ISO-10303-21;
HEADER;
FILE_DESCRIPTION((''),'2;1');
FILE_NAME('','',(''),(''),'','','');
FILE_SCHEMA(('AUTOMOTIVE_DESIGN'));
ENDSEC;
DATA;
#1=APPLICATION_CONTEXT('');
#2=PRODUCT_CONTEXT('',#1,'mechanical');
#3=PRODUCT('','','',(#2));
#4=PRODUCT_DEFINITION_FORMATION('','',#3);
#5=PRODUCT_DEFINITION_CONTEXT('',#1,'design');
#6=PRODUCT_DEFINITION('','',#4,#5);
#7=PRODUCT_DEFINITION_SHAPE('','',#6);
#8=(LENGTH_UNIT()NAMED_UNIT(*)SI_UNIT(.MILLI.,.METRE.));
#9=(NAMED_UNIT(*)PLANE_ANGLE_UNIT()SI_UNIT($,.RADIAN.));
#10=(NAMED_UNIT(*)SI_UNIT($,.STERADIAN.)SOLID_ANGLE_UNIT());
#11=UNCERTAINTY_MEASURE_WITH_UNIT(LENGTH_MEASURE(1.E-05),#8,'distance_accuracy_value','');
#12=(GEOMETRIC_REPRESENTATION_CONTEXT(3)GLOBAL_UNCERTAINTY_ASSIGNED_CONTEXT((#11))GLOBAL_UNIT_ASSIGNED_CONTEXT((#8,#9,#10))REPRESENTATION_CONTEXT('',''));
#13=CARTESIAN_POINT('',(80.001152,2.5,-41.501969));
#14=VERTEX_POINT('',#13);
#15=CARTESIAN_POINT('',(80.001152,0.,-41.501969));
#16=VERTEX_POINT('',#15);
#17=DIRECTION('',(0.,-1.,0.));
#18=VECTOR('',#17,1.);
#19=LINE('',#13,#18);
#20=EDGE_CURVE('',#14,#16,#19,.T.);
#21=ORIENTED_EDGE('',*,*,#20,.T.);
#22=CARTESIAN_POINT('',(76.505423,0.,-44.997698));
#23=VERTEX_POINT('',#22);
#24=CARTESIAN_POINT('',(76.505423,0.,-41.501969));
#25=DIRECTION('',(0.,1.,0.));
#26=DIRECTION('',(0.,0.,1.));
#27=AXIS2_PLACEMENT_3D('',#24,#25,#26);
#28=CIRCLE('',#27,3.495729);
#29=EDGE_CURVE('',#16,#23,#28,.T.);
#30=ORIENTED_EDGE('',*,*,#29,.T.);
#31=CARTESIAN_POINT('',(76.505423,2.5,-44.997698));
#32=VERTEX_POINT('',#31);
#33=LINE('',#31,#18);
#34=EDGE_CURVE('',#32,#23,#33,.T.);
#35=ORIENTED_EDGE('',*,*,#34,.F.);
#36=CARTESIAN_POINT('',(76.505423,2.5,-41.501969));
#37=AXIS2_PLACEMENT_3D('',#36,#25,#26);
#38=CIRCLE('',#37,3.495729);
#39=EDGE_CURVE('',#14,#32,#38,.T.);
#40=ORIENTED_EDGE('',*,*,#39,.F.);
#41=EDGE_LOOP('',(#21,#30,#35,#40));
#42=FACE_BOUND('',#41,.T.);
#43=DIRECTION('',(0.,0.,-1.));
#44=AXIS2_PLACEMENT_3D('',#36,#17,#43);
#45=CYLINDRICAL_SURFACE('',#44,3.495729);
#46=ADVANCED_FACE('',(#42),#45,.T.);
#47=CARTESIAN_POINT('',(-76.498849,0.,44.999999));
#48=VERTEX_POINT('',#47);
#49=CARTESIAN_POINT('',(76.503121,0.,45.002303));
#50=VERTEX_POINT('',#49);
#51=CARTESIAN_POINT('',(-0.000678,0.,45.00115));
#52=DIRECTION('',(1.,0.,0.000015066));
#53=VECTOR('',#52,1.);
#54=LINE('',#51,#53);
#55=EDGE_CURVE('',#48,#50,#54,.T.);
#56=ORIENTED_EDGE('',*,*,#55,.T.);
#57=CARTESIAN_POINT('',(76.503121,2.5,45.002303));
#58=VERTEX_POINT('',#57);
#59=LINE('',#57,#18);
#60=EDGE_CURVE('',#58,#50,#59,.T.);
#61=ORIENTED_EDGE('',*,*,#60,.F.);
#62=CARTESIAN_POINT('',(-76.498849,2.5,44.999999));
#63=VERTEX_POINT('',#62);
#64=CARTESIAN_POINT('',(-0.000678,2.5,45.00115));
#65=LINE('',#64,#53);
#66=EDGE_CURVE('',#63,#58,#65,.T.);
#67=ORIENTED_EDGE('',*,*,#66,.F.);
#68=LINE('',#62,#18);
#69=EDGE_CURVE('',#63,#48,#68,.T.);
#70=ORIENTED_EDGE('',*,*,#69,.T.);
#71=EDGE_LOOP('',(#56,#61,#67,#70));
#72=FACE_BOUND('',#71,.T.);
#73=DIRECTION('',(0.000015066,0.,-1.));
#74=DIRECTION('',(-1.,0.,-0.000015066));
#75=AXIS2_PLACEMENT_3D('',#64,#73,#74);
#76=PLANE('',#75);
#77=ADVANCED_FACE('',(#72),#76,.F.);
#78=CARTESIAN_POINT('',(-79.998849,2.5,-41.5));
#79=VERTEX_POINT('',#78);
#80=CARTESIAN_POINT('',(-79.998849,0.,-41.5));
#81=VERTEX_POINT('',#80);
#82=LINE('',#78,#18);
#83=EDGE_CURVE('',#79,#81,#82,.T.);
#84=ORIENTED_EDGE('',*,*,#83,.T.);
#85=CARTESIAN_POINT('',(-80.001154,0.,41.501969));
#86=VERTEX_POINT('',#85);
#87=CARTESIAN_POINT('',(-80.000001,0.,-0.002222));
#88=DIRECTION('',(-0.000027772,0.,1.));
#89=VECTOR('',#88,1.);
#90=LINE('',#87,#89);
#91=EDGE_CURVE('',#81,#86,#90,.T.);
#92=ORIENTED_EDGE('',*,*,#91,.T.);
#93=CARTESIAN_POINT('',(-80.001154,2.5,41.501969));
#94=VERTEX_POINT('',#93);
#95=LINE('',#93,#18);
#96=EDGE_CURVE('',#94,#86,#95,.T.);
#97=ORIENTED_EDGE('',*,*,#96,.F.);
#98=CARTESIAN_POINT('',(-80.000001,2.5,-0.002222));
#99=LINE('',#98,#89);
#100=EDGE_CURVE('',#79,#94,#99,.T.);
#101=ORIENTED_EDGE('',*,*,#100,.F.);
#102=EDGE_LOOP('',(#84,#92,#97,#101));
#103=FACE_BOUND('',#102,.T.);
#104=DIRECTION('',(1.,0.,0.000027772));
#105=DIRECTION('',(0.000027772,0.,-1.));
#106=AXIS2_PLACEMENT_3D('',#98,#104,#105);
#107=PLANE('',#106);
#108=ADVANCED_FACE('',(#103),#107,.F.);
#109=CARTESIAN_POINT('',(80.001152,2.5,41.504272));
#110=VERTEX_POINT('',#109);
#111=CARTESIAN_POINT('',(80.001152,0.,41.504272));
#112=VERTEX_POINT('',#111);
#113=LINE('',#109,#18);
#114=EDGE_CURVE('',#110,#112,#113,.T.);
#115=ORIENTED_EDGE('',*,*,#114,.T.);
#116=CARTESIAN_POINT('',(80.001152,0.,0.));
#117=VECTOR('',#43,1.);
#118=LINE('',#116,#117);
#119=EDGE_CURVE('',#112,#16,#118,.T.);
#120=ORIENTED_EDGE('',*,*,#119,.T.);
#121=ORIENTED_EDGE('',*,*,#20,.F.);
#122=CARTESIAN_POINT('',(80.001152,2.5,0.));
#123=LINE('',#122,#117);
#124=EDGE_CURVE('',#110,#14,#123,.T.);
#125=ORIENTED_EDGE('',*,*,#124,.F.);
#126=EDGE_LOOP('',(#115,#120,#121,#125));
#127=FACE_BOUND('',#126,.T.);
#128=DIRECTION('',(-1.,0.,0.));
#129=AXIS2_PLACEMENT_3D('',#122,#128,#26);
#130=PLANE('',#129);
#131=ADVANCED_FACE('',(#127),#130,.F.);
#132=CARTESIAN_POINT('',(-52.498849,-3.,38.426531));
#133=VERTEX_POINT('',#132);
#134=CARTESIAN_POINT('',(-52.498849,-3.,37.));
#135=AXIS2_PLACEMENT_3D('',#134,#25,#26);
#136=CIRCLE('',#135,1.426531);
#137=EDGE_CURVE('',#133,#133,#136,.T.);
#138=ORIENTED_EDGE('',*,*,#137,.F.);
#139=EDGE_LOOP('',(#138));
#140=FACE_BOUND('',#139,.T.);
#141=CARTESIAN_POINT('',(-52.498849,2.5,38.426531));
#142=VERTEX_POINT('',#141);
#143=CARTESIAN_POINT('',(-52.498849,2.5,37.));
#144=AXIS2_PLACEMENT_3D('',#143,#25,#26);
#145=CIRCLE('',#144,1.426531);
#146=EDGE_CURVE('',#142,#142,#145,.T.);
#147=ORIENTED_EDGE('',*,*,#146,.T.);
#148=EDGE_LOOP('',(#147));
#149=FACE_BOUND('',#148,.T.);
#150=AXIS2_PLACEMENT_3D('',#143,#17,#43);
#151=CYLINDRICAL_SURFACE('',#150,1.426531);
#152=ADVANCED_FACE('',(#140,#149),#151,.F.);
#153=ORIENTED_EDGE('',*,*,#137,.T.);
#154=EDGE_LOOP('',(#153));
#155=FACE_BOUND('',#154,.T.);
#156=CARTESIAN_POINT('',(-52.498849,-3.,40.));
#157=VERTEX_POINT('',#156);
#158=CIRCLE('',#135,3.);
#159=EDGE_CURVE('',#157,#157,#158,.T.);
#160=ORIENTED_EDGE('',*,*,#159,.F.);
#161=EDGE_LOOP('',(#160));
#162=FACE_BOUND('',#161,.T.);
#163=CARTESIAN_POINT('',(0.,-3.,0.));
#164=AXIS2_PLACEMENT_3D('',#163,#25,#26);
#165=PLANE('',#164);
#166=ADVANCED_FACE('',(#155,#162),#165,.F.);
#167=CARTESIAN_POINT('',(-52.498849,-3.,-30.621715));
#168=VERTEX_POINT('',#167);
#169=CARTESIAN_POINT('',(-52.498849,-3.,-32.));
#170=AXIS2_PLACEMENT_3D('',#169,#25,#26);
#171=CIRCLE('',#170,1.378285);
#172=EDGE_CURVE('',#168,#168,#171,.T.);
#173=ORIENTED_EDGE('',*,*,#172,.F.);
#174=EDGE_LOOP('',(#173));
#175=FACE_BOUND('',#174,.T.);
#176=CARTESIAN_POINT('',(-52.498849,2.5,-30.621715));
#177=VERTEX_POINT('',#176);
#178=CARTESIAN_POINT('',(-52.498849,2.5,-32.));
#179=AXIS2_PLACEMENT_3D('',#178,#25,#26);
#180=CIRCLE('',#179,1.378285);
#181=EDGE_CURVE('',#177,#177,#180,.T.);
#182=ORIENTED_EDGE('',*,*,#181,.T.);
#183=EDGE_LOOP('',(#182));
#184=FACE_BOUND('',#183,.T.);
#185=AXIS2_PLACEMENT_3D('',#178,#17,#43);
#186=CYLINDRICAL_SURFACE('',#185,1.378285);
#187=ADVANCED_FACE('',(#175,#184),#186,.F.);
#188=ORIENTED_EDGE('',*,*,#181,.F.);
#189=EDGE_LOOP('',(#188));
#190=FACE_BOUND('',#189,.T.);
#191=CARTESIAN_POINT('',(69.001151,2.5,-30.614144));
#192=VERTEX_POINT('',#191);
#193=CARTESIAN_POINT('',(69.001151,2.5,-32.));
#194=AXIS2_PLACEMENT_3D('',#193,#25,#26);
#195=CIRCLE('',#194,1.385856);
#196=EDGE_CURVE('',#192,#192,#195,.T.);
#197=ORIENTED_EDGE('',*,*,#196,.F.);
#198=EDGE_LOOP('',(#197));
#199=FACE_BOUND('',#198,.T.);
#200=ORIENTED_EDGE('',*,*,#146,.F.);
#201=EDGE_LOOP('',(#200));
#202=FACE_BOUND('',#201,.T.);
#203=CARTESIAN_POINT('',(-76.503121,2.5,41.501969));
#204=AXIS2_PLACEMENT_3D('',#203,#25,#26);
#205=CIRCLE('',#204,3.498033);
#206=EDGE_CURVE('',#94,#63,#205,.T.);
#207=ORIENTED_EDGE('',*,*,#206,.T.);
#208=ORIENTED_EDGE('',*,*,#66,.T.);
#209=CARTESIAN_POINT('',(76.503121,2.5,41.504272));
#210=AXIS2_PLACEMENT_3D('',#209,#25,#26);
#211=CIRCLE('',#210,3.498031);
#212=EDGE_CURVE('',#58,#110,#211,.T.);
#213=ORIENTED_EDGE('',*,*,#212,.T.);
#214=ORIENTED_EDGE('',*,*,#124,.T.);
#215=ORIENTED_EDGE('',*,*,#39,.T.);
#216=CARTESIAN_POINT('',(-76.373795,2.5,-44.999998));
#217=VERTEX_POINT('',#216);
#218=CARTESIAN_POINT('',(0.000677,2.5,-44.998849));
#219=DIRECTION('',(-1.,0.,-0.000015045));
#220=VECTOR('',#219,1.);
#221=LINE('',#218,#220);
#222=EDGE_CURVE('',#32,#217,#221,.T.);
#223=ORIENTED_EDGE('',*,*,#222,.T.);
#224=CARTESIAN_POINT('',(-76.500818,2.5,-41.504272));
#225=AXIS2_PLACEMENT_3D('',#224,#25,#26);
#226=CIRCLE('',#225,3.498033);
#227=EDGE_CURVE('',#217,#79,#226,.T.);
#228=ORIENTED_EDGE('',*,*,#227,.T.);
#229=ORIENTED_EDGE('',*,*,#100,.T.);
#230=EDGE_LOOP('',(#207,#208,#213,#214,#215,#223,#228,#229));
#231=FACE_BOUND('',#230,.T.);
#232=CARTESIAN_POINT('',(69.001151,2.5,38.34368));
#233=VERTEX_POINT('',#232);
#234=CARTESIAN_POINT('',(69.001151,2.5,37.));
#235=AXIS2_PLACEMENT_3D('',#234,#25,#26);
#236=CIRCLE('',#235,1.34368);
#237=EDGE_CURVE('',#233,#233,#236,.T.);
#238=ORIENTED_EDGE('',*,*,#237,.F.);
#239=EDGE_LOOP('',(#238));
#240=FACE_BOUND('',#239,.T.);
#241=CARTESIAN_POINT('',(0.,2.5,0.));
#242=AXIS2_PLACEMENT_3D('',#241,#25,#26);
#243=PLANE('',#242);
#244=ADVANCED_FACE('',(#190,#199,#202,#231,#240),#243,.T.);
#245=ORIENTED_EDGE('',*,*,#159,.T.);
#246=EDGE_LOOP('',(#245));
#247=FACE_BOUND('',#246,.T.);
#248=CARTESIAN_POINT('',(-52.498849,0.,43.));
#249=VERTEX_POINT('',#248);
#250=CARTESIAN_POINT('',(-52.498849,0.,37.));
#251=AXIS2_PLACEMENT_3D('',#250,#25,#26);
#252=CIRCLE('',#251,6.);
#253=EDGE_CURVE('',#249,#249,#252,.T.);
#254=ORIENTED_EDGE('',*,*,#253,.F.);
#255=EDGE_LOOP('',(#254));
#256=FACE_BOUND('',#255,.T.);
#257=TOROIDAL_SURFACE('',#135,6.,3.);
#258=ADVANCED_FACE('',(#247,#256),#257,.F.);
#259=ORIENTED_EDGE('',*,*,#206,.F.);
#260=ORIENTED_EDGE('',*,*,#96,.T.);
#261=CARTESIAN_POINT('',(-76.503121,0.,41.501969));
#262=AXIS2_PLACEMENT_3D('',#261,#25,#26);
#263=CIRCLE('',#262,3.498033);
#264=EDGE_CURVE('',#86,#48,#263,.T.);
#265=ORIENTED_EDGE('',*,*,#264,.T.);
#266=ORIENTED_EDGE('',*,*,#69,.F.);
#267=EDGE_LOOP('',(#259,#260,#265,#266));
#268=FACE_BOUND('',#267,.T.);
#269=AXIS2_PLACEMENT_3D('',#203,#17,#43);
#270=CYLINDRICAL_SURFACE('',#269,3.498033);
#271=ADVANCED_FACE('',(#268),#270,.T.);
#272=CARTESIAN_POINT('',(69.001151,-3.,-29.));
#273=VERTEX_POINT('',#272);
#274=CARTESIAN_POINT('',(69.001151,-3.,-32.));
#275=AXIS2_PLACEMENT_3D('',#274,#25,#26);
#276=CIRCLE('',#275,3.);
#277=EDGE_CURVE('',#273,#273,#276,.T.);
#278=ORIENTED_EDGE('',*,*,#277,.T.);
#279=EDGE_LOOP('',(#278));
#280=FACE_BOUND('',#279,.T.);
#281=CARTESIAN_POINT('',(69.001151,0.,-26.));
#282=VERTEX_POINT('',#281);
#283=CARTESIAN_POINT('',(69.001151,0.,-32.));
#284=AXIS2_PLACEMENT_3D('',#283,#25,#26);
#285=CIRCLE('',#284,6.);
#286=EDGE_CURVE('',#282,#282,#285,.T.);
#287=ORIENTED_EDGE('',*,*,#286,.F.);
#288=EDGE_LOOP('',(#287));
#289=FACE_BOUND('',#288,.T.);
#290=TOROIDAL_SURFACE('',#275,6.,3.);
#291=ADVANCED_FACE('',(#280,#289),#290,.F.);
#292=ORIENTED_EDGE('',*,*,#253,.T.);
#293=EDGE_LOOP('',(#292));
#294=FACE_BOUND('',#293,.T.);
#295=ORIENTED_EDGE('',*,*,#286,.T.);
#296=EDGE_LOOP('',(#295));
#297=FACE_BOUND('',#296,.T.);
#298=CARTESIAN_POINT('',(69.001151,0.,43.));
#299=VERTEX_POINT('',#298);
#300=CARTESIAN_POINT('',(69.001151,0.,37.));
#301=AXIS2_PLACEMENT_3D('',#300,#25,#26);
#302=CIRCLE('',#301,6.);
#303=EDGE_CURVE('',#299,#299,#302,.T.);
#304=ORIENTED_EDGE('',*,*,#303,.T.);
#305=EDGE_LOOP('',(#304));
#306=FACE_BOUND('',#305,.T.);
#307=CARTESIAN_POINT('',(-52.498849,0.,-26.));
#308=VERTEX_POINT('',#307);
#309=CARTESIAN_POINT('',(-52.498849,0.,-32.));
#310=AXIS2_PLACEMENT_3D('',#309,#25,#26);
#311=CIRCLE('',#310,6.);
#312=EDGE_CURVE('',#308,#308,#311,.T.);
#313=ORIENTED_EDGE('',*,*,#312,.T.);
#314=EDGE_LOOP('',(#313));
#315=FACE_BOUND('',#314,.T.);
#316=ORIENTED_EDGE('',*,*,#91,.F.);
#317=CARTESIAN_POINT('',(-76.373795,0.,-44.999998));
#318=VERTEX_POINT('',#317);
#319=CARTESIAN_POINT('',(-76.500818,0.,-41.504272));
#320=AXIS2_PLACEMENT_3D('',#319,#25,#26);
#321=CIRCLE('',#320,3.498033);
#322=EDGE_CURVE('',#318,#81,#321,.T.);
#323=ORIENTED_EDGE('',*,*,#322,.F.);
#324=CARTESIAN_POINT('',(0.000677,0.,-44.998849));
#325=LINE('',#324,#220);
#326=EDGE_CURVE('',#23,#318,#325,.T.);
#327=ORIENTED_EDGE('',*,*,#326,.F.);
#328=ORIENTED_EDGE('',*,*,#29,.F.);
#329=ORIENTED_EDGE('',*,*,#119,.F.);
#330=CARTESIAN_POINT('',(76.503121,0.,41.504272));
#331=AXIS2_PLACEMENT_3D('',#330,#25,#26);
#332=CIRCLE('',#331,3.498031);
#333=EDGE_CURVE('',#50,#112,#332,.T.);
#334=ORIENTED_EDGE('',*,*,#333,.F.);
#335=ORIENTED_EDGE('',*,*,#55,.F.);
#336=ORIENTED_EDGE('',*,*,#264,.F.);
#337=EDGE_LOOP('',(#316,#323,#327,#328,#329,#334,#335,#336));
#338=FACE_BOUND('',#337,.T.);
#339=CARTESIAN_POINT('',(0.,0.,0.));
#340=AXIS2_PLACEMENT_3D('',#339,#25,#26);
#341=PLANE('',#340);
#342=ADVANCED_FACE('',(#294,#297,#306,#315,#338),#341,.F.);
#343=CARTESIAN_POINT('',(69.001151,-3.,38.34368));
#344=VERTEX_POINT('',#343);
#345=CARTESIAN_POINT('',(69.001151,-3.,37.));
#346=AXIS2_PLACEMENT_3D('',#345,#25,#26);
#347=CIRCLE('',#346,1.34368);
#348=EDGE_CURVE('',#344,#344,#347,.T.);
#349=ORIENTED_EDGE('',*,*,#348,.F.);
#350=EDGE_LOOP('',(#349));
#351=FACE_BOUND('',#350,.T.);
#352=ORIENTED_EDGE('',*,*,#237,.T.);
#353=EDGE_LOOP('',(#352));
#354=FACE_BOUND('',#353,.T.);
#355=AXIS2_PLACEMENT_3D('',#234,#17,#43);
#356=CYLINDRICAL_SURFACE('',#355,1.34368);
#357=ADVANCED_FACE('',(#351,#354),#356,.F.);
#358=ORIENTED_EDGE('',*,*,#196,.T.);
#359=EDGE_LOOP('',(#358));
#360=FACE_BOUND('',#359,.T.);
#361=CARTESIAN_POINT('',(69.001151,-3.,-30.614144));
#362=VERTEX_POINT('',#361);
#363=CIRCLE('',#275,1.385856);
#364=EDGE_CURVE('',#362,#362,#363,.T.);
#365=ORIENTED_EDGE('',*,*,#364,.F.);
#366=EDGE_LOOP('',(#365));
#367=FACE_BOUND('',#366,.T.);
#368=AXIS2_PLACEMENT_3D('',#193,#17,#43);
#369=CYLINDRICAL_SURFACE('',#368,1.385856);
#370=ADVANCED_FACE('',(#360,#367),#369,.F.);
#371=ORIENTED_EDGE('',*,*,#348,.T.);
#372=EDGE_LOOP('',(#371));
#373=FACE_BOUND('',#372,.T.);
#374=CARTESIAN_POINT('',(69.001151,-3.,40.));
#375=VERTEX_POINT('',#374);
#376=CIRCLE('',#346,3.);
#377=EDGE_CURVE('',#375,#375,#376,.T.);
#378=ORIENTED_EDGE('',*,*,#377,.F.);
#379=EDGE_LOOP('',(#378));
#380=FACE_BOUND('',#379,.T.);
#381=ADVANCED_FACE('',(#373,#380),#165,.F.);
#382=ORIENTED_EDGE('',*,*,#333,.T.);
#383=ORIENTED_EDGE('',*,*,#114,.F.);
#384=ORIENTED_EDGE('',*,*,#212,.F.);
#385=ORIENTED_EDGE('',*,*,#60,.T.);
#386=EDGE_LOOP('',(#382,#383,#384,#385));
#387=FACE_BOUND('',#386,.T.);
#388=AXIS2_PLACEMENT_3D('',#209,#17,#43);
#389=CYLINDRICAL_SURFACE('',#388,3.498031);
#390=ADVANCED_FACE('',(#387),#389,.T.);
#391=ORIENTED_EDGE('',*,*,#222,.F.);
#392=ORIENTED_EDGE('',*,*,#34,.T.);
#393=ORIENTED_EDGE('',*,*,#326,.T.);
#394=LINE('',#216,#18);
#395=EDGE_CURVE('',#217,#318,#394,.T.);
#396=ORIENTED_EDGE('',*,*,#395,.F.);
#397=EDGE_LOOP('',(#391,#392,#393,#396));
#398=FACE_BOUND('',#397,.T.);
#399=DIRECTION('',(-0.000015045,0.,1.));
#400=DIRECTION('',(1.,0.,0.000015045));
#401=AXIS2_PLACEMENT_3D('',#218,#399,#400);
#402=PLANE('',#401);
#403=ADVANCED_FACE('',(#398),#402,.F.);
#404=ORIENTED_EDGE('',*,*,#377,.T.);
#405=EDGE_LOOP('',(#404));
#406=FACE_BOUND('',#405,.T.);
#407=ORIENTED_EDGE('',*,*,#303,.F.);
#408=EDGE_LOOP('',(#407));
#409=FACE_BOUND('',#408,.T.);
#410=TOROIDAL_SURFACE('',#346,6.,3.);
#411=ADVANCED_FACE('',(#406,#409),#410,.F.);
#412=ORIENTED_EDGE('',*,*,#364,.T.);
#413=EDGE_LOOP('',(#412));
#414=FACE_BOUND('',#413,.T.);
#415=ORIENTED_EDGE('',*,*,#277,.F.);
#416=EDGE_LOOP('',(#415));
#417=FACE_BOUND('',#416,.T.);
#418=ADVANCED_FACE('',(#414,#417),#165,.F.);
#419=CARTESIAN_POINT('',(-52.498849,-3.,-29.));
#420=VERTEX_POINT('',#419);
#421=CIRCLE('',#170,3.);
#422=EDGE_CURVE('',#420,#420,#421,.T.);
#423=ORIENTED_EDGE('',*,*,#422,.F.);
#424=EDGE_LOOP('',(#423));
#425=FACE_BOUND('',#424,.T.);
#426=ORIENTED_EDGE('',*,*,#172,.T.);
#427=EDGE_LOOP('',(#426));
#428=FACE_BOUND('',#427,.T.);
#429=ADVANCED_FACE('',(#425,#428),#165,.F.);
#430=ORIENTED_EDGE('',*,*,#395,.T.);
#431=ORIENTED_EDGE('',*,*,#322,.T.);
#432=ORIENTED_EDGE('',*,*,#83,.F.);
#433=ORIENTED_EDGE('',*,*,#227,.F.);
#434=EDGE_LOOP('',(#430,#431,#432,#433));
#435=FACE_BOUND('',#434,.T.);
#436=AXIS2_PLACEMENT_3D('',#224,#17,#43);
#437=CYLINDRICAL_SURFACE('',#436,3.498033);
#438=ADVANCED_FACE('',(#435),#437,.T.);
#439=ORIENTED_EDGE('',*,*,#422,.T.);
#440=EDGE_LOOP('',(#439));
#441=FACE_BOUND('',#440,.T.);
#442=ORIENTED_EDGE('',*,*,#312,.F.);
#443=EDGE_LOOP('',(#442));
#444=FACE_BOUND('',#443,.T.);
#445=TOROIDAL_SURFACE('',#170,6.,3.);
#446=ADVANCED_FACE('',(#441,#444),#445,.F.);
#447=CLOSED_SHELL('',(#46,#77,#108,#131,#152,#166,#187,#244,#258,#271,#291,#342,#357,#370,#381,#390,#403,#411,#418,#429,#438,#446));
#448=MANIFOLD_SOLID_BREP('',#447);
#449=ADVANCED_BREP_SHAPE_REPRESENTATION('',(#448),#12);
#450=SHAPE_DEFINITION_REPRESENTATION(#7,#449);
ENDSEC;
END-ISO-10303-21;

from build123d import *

# Parameters (mm, degrees)
BOSS_EXTRUDE1_OUTLINE_R   = 1.426531271
BOSS_EXTRUDE1_OUTLINE_R_2 = 1.343679746
BOSS_EXTRUDE1_OUTLINE_R_3 = 1.378285228
BOSS_EXTRUDE1_OUTLINE_R_4 = 1.385856135
BOSS_EXTRUDE1_DEPTH       = 2.5
BOSS_EXTRUDE2_START       = -3
SKETCH1_3_R               = 3
SKETCH1_3_R_2             = 1.378285228
SKETCH1_3_R_3             = 1.385856135
SKETCH1_3_R_4             = 1.343679746
SKETCH1_3_R_5             = 1.426531271
BOSS_EXTRUDE2_DEPTH       = 3
FILLET1_R                 = 3


# Read off the part's stored shape, not the designer's step: Boss-Extrude1
with BuildPart() as part:
    # Boss-Extrude1 outline → Boss-Extrude1 (new body)
    with BuildSketch(Plane(origin=(0, 0, 0), x_dir=(1, 0, 0), z_dir=(0, 1, 0))):
        with BuildLine():
            Line((-76.498848721, -45), (76.503120692, -45.002303107))
            ThreePointArc((76.503120692, -45.002303107), (78.976602231, -43.977753507), (80.001151831, -41.504271968))
            Line((80.001151831, -41.504271968), (80.001151831, 41.501969416))
            ThreePointArc((80.001151831, 41.501969416), (78.977276633, 43.973822805), (76.505423244, 44.997698002))
            Line((76.505423244, 44.997698002), (-76.373794917, 44.999998119))
            ThreePointArc((-76.373794917, 44.999998119), (-78.930513463, 44.02078083), (-79.998848724, 41.5))
            Line((-79.998848724, 41.5), (-80.001153885, -41.501969416))
            ThreePointArc((-80.001153885, -41.501969416), (-78.975092852, -43.976962316), (-76.498848721, -45))
        make_face()
        with Locations((-52.498848724, -37)):
            Circle(BOSS_EXTRUDE1_OUTLINE_R, mode=Mode.SUBTRACT)
        with Locations((69.001151276, -37)):
            Circle(BOSS_EXTRUDE1_OUTLINE_R_2, mode=Mode.SUBTRACT)
        with Locations((-52.498848724, 32)):
            Circle(BOSS_EXTRUDE1_OUTLINE_R_3, mode=Mode.SUBTRACT)
        with Locations((69.001151276, 32)):
            Circle(BOSS_EXTRUDE1_OUTLINE_R_4, mode=Mode.SUBTRACT)
    extrude(amount=BOSS_EXTRUDE1_DEPTH)

    # Sketch1<3> → Boss-Extrude2 (add)
    # profile 1 of 4: a face of its own
    with BuildSketch(Plane(origin=(0, 0, 0), x_dir=(1, 0, 0), z_dir=(0, 1, 0)).offset(BOSS_EXTRUDE2_START)):
        with Locations(Location((-52.498848724, 32, 0), (0, 0, 270))):
            Circle(SKETCH1_3_R)
        with Locations(Location((-52.498848724, 32, 0), (0, 0, 270))):
            Circle(SKETCH1_3_R_2, mode=Mode.SUBTRACT)
    # profile 2 of 4: a face of its own
    with BuildSketch(Plane(origin=(0, 0, 0), x_dir=(1, 0, 0), z_dir=(0, 1, 0)).offset(BOSS_EXTRUDE2_START)):
        with Locations(Location((69.001151276, 32, 0), (0, 0, 270))):
            Circle(SKETCH1_3_R)
        with Locations(Location((69.001151276, 32, 0), (0, 0, 270))):
            Circle(SKETCH1_3_R_3, mode=Mode.SUBTRACT)
    # profile 3 of 4: a face of its own
    with BuildSketch(Plane(origin=(0, 0, 0), x_dir=(1, 0, 0), z_dir=(0, 1, 0)).offset(BOSS_EXTRUDE2_START)):
        with Locations(Location((69.001151276, -37, 0), (0, 0, 270))):
            Circle(SKETCH1_3_R)
        with Locations(Location((69.001151276, -37, 0), (0, 0, 270))):
            Circle(SKETCH1_3_R_4, mode=Mode.SUBTRACT)
    # profile 4 of 4: a face of its own
    with BuildSketch(Plane(origin=(0, 0, 0), x_dir=(1, 0, 0), z_dir=(0, 1, 0)).offset(BOSS_EXTRUDE2_START)):
        with Locations(Location((-52.498848724, -37, 0), (0, 0, 270))):
            Circle(SKETCH1_3_R)
        with Locations(Location((-52.498848724, -37, 0), (0, 0, 270))):
            Circle(SKETCH1_3_R_5, mode=Mode.SUBTRACT)
    extrude(amount=BOSS_EXTRUDE2_DEPTH)

    # Fillet1
    fillet1_edges = [part.edges().sort_by_distance(p)[0] for p in [
        (-52.498848724, 0, -35),
        (69.001151276, 0, -35),
        (69.001151276, 0, 34),
        (-52.498848724, 0, 34),
    ]]
    fillet(fillet1_edges, radius=FILLET1_R - 0.0001)  # a hair under: the kernel refuses the full size


solid = part.part
